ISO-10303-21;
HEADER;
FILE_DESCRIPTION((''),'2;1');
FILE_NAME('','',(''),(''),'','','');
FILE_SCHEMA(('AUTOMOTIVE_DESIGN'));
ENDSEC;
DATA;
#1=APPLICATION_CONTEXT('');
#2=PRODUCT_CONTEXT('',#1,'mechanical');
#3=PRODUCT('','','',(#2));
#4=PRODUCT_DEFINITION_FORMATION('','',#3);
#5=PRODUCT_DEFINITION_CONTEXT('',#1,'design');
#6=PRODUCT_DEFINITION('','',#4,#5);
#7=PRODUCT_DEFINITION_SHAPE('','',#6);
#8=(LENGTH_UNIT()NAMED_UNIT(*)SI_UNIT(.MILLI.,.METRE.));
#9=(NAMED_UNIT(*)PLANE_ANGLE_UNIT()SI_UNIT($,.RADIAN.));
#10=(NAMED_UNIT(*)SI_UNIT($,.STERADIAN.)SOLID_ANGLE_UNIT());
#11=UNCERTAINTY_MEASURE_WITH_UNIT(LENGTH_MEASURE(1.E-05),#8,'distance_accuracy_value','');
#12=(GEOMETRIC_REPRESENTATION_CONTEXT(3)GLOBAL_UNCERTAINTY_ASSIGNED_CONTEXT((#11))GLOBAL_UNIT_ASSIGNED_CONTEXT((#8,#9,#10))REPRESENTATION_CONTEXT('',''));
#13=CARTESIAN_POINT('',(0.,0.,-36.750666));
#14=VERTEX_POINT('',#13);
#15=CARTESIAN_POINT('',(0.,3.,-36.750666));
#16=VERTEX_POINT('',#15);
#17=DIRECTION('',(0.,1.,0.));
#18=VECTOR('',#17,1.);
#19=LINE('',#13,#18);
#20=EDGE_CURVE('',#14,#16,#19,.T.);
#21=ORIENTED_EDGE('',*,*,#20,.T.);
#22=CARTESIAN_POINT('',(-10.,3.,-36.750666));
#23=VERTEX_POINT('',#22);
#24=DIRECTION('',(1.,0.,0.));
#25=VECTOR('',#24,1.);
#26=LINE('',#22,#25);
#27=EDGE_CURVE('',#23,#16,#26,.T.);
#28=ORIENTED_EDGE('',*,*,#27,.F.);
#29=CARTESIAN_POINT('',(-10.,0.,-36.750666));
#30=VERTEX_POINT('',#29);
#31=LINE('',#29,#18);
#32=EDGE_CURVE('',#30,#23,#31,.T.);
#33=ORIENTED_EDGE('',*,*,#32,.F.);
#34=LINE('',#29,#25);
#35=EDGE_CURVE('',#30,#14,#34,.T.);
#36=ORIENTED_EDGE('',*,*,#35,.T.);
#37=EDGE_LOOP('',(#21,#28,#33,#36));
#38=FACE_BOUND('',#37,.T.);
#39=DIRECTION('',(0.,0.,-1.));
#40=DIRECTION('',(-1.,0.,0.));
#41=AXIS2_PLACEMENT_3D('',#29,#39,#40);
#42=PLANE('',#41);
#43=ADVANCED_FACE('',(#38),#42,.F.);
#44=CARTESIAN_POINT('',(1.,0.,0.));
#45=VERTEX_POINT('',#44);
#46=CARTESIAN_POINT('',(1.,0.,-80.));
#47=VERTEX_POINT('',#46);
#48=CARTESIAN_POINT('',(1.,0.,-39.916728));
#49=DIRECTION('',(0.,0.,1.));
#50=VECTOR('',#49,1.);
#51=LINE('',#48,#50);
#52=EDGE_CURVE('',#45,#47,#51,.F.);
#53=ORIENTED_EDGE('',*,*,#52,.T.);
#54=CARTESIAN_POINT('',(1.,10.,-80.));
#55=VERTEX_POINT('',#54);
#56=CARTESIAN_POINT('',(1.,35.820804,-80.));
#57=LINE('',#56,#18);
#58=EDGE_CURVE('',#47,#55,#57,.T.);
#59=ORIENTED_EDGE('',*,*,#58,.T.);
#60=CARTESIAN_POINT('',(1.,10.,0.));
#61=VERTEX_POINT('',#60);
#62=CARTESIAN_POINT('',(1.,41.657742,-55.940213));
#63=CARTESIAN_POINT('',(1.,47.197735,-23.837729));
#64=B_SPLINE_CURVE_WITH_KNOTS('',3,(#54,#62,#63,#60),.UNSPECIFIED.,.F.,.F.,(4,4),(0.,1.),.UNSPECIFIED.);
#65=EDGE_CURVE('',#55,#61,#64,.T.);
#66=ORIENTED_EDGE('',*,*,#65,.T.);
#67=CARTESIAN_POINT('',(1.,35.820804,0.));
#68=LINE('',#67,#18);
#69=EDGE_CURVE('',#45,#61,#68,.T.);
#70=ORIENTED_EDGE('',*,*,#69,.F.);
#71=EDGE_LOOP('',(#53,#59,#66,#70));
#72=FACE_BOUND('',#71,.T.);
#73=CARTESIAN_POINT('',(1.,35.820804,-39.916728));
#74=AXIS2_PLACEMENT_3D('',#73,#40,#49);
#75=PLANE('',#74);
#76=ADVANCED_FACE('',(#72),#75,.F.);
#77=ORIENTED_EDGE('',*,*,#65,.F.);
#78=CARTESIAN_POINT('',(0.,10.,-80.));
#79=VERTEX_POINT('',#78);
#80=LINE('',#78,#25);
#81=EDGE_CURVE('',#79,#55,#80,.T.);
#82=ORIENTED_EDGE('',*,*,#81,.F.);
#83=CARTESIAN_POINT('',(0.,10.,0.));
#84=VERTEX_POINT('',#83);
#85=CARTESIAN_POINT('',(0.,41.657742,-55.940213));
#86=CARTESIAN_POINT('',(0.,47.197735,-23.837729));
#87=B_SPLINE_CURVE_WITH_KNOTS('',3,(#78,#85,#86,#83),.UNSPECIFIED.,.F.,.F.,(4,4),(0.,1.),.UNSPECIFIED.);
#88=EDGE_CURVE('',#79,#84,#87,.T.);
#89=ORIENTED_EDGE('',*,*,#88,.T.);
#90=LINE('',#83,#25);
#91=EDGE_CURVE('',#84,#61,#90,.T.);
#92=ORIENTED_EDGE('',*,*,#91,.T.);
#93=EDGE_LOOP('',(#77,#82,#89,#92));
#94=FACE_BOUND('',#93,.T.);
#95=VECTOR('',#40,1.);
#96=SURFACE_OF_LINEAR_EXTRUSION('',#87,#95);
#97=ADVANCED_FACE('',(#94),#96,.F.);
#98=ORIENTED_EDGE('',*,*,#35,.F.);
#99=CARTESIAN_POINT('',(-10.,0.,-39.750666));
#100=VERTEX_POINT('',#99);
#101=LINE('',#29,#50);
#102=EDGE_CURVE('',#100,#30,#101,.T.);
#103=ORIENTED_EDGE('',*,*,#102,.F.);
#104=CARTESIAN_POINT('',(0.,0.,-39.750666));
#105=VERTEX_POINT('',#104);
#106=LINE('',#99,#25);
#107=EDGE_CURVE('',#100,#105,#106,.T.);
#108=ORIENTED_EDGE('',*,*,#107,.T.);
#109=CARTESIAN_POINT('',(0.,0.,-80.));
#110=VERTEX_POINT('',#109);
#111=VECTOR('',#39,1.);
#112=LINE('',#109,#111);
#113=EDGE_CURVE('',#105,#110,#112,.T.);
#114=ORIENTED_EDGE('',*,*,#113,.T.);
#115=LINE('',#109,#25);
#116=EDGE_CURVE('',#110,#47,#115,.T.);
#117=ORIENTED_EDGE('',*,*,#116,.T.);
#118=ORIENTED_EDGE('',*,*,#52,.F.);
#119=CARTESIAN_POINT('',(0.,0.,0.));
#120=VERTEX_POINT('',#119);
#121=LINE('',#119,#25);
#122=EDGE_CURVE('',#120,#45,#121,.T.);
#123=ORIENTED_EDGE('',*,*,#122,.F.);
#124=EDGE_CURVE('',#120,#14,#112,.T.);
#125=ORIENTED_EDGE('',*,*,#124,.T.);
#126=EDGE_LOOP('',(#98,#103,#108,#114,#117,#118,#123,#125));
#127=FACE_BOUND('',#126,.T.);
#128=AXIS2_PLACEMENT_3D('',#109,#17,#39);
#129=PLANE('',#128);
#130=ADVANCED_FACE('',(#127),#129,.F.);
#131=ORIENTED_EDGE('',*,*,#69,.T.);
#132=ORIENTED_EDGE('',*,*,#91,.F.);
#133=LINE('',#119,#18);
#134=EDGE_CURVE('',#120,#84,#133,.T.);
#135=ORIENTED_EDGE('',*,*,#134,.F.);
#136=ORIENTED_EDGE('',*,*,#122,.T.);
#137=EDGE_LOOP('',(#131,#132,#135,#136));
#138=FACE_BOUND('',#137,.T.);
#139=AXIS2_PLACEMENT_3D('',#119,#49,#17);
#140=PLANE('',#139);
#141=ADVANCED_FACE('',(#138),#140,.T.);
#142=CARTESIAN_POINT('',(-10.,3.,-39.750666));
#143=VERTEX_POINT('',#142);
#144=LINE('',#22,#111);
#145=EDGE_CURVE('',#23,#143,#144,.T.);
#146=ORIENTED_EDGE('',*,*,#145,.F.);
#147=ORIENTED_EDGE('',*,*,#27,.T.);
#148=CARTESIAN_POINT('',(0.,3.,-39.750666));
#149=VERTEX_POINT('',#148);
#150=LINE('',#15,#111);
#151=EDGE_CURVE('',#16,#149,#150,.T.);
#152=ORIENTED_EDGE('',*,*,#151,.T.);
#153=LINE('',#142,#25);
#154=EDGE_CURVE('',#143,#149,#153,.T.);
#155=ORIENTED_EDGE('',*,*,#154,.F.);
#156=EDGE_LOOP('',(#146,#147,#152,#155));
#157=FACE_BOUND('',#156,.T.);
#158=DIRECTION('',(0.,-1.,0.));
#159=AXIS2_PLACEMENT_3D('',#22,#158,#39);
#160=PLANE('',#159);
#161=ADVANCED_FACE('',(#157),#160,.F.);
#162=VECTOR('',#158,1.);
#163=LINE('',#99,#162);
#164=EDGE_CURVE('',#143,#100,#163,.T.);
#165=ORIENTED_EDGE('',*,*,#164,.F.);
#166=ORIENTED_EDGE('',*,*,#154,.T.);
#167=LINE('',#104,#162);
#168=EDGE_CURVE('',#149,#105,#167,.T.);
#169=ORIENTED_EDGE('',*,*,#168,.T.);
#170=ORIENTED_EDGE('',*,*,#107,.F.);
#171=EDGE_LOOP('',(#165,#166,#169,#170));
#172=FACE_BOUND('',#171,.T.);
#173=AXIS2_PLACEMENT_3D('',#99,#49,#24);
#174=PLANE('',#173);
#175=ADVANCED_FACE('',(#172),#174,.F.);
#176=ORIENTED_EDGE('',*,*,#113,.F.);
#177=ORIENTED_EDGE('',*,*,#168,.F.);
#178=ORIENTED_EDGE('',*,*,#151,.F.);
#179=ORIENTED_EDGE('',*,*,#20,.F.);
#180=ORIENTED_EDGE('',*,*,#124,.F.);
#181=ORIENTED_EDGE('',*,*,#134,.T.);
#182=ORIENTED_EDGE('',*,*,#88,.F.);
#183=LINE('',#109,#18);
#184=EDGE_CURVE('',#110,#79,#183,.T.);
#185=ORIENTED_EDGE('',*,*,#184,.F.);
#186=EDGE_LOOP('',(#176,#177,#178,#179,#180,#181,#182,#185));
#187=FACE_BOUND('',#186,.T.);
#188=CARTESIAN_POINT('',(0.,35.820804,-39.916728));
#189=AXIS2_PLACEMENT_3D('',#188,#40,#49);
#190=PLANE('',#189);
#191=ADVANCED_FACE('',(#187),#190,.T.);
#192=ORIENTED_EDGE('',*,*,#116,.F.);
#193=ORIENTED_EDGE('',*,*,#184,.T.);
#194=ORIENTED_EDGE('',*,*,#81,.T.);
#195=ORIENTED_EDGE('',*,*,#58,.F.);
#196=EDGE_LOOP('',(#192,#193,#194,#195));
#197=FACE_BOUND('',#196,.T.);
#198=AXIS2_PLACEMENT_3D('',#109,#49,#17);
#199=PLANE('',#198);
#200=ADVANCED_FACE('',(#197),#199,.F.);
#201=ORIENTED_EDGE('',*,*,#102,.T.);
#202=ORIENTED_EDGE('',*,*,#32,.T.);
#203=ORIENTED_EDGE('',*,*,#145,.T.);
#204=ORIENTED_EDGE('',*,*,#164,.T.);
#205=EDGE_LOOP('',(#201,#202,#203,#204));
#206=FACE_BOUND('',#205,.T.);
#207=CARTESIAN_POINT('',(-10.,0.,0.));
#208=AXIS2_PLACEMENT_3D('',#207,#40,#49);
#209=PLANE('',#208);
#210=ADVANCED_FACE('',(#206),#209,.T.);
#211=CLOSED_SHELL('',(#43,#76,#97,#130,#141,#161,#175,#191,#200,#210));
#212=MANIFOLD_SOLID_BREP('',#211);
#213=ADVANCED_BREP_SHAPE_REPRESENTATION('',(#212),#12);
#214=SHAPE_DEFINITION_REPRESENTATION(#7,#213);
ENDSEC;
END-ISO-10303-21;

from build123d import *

# Parameters (mm, degrees)
THICKEN1_DEPTH      = 1
SKETCH6_W           = 3
SKETCH6_H           = 3
BOSS_EXTRUDE1_DEPTH = 10


# Read off the part's stored shape, not the designer's step: Thicken1
with BuildPart() as part:
    # Thicken1 outline → Thicken1 (new body)
    with BuildSketch(Plane.YZ):
        with BuildLine():
            add(Edge.make_bspline(
                [(10, -80), (41.657742077, -55.94021324), (47.197734967, -23.837728835), (10, 0)],
                knots=[0, 0, 0, 0, 1, 1, 1, 1], degree=3))
            Line((10, 0), (0, 0))
            Line((0, 0), (0, -80))
            Line((0, -80), (10, -80))
        make_face()
    extrude(amount=THICKEN1_DEPTH)

    # Sketch6 → Boss-Extrude1 (add)
    with BuildSketch(Plane.ZY):
        with Locations((-38.250665785, 1.5)):
            Rectangle(SKETCH6_W, SKETCH6_H)
    extrude(amount=BOSS_EXTRUDE1_DEPTH)


solid = part.part
